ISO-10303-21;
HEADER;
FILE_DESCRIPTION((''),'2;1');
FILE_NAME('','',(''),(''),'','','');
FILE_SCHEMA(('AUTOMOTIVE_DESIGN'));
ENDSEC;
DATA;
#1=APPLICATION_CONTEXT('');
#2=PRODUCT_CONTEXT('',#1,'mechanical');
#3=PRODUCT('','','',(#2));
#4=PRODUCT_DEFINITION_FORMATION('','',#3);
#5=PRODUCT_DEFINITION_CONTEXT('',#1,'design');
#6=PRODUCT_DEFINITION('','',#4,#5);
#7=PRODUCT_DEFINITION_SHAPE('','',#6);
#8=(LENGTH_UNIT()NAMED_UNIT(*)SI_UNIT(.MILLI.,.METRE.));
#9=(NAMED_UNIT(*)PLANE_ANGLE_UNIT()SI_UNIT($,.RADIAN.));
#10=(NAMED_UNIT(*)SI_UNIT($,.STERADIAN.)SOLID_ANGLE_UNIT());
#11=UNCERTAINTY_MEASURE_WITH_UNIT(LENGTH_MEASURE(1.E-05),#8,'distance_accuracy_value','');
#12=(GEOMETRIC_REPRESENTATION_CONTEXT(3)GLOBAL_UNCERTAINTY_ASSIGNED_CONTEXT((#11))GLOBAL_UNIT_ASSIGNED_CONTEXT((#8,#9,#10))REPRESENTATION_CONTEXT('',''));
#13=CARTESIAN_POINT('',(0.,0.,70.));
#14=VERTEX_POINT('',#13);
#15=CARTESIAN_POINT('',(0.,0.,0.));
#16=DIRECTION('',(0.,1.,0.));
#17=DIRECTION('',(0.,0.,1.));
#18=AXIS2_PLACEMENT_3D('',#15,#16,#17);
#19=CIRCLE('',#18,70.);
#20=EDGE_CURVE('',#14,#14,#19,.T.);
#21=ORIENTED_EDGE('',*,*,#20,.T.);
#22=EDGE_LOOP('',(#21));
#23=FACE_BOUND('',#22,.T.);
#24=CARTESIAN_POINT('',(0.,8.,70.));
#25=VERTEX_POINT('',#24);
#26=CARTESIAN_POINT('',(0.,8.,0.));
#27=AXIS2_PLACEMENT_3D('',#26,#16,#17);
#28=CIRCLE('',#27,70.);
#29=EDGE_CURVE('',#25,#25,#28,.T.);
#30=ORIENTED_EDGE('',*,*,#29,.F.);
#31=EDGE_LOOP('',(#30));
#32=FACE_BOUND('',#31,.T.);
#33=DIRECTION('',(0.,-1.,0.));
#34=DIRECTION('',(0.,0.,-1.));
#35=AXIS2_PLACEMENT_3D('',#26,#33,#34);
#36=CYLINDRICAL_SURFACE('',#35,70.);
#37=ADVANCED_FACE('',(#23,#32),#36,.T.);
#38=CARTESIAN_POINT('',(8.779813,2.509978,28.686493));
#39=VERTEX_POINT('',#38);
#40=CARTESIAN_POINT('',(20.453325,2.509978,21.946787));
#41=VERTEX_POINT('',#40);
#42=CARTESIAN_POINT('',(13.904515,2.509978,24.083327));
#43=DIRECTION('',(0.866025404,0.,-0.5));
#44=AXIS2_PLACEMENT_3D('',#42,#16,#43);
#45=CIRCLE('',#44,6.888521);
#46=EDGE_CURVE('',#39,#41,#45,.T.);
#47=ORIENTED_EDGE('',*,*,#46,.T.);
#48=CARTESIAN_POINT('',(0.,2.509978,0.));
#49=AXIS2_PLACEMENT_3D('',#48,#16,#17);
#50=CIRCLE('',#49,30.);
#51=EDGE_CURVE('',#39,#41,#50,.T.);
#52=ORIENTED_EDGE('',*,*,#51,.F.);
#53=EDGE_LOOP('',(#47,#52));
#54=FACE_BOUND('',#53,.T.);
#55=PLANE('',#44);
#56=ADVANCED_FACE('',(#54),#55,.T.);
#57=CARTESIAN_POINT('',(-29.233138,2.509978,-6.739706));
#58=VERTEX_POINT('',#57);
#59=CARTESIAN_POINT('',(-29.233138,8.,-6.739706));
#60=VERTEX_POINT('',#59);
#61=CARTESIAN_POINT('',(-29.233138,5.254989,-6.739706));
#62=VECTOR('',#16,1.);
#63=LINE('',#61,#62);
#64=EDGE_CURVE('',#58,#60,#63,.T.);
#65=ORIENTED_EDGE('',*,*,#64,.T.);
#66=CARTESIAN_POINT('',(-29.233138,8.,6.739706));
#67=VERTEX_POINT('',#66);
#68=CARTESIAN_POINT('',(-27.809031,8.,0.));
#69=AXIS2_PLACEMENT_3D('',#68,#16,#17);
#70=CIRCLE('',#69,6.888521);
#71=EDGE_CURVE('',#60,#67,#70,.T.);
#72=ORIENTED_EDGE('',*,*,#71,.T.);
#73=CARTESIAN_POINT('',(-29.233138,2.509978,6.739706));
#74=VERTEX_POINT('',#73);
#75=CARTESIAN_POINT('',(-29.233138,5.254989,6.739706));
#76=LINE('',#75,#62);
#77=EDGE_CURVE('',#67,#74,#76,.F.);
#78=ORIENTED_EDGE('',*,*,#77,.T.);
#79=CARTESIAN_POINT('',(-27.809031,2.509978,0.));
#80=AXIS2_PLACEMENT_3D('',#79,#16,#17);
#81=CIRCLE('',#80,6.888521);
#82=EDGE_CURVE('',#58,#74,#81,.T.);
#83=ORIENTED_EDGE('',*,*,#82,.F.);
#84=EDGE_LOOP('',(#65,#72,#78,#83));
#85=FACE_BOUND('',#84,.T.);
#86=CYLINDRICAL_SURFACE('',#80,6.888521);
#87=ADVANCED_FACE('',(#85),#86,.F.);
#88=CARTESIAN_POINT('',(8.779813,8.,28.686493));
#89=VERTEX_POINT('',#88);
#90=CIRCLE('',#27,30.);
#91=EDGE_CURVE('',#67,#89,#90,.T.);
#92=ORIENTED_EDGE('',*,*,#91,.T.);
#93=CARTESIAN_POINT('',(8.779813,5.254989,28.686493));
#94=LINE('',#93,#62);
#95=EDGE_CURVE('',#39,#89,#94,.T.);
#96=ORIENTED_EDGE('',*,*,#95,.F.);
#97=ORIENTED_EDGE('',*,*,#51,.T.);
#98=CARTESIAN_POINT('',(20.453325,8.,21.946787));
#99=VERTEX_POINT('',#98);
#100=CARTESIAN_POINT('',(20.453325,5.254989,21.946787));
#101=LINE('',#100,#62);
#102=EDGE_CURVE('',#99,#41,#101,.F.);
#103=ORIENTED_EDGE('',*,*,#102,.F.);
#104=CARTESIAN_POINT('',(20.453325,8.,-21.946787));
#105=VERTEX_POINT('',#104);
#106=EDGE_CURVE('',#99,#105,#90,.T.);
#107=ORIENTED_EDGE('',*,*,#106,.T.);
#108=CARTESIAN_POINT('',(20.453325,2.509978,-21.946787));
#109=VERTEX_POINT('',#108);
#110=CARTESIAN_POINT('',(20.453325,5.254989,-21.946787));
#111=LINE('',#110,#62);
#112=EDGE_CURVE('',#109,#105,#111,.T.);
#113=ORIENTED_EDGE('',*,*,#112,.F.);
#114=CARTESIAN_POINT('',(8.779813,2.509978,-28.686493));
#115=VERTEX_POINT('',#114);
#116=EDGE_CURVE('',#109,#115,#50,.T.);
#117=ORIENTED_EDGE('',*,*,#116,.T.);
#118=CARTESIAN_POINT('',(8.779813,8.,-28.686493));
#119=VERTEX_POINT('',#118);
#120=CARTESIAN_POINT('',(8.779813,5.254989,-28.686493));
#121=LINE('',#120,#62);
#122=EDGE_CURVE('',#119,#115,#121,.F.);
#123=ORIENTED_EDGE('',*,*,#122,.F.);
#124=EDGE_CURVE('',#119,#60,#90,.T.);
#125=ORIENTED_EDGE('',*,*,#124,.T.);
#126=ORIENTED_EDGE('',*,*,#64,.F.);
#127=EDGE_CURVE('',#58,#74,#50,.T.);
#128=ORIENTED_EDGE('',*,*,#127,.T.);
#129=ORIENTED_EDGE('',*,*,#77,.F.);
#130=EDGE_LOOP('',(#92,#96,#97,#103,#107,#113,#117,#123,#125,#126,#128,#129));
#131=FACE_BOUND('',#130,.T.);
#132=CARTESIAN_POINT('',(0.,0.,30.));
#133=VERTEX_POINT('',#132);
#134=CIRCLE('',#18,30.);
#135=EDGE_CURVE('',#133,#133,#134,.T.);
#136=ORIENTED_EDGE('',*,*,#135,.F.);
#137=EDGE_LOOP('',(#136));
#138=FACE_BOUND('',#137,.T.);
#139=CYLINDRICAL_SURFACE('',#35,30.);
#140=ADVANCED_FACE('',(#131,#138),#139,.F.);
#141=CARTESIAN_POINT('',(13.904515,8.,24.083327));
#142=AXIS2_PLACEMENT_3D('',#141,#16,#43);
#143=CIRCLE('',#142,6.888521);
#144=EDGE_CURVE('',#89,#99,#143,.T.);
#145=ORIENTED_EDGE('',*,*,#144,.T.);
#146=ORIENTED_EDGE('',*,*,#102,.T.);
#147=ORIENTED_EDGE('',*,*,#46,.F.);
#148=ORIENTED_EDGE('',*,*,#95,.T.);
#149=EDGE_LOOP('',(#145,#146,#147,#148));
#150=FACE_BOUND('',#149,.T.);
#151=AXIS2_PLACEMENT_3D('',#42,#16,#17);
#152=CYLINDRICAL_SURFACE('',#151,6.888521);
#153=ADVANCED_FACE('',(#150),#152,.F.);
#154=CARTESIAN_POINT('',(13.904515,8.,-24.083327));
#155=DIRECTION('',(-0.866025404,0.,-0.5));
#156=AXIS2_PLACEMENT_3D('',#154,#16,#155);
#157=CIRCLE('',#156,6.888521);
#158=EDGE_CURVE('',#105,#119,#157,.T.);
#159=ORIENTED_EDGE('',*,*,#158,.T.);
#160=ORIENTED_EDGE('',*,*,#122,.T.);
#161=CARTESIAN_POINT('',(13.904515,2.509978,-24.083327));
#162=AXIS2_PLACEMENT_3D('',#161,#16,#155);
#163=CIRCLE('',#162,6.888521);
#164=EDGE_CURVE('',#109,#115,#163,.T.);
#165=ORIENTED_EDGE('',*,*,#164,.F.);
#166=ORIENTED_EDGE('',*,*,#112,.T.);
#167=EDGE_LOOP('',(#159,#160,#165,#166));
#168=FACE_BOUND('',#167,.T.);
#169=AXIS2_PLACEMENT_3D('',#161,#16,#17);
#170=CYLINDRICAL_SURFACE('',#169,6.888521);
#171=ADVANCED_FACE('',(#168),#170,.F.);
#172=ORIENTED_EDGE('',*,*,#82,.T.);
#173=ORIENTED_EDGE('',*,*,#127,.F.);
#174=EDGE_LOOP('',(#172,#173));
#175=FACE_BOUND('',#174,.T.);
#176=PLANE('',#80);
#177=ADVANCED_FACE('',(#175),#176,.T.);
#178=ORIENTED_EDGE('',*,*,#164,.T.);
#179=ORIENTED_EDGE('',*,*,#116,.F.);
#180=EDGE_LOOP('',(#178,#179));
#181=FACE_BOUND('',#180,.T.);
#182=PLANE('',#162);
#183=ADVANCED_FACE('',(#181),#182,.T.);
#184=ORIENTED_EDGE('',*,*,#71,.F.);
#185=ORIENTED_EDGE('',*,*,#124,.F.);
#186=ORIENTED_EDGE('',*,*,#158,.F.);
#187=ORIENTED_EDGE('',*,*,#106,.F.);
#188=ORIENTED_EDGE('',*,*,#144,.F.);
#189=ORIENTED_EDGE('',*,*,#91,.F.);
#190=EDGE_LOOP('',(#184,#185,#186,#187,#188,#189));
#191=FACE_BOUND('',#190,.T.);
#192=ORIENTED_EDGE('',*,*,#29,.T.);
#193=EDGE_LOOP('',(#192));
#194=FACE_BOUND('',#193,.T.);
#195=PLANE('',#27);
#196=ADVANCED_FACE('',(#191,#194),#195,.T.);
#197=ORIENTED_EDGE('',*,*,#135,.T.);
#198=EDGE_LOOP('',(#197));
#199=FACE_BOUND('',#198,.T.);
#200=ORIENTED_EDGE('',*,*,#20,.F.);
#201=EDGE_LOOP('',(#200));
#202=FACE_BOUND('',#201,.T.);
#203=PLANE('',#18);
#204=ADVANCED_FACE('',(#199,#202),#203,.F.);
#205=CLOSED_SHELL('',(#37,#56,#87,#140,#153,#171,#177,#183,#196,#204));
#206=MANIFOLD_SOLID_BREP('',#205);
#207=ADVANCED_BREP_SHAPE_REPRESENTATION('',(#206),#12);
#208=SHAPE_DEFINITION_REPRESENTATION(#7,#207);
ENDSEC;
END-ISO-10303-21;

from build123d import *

# Parameters (mm, degrees)
SKETCH1_R           = 70
BOSS_EXTRUDE1_DEPTH = 8
SKETCH2_R           = 30
CUT_EXTRUDE1_DEPTH  = 100.317672143
SKETCH3_R           = 6.888520525
CUT_EXTRUDE2_DEPTH  = 5.490022236
CIRPATTERN1_COUNT   = 3


with BuildPart() as part:
    # Sketch1 → Boss-Extrude1 (new body)
    with BuildSketch(Plane(origin=(0, 0, 0), x_dir=(1, 0, 0), z_dir=(0, 1, 0))):
        Circle(SKETCH1_R)
    extrude(amount=BOSS_EXTRUDE1_DEPTH)

    # Sketch2 → Cut-Extrude1 (cut, through all)
    with BuildSketch(Plane(origin=(0, 0, 0), x_dir=(1, 0, 0), z_dir=(0, 1, 0))):
        Circle(SKETCH2_R)
    extrude(amount=CUT_EXTRUDE1_DEPTH, mode=Mode.SUBTRACT)

    # Sketch3 → Cut-Extrude2 (cut)
    with BuildSketch(Plane(origin=(0, 8, 0), x_dir=(1, 0, 0), z_dir=(0, 1, 0))):
        with Locations((-27.809030926, 0)):
            Circle(SKETCH3_R)
    cut_extrude2 = extrude(amount=-CUT_EXTRUDE2_DEPTH, mode=Mode.SUBTRACT)

    # CirPattern1: Cut-Extrude2 ×3 about axis
    cirpattern1_axis = Axis((0, 0, 0), (0, 1, 0))
    for i in range(1, CIRPATTERN1_COUNT):
        add(cut_extrude2.rotate(cirpattern1_axis, i * 360 / CIRPATTERN1_COUNT), mode=Mode.SUBTRACT)


solid = part.part
